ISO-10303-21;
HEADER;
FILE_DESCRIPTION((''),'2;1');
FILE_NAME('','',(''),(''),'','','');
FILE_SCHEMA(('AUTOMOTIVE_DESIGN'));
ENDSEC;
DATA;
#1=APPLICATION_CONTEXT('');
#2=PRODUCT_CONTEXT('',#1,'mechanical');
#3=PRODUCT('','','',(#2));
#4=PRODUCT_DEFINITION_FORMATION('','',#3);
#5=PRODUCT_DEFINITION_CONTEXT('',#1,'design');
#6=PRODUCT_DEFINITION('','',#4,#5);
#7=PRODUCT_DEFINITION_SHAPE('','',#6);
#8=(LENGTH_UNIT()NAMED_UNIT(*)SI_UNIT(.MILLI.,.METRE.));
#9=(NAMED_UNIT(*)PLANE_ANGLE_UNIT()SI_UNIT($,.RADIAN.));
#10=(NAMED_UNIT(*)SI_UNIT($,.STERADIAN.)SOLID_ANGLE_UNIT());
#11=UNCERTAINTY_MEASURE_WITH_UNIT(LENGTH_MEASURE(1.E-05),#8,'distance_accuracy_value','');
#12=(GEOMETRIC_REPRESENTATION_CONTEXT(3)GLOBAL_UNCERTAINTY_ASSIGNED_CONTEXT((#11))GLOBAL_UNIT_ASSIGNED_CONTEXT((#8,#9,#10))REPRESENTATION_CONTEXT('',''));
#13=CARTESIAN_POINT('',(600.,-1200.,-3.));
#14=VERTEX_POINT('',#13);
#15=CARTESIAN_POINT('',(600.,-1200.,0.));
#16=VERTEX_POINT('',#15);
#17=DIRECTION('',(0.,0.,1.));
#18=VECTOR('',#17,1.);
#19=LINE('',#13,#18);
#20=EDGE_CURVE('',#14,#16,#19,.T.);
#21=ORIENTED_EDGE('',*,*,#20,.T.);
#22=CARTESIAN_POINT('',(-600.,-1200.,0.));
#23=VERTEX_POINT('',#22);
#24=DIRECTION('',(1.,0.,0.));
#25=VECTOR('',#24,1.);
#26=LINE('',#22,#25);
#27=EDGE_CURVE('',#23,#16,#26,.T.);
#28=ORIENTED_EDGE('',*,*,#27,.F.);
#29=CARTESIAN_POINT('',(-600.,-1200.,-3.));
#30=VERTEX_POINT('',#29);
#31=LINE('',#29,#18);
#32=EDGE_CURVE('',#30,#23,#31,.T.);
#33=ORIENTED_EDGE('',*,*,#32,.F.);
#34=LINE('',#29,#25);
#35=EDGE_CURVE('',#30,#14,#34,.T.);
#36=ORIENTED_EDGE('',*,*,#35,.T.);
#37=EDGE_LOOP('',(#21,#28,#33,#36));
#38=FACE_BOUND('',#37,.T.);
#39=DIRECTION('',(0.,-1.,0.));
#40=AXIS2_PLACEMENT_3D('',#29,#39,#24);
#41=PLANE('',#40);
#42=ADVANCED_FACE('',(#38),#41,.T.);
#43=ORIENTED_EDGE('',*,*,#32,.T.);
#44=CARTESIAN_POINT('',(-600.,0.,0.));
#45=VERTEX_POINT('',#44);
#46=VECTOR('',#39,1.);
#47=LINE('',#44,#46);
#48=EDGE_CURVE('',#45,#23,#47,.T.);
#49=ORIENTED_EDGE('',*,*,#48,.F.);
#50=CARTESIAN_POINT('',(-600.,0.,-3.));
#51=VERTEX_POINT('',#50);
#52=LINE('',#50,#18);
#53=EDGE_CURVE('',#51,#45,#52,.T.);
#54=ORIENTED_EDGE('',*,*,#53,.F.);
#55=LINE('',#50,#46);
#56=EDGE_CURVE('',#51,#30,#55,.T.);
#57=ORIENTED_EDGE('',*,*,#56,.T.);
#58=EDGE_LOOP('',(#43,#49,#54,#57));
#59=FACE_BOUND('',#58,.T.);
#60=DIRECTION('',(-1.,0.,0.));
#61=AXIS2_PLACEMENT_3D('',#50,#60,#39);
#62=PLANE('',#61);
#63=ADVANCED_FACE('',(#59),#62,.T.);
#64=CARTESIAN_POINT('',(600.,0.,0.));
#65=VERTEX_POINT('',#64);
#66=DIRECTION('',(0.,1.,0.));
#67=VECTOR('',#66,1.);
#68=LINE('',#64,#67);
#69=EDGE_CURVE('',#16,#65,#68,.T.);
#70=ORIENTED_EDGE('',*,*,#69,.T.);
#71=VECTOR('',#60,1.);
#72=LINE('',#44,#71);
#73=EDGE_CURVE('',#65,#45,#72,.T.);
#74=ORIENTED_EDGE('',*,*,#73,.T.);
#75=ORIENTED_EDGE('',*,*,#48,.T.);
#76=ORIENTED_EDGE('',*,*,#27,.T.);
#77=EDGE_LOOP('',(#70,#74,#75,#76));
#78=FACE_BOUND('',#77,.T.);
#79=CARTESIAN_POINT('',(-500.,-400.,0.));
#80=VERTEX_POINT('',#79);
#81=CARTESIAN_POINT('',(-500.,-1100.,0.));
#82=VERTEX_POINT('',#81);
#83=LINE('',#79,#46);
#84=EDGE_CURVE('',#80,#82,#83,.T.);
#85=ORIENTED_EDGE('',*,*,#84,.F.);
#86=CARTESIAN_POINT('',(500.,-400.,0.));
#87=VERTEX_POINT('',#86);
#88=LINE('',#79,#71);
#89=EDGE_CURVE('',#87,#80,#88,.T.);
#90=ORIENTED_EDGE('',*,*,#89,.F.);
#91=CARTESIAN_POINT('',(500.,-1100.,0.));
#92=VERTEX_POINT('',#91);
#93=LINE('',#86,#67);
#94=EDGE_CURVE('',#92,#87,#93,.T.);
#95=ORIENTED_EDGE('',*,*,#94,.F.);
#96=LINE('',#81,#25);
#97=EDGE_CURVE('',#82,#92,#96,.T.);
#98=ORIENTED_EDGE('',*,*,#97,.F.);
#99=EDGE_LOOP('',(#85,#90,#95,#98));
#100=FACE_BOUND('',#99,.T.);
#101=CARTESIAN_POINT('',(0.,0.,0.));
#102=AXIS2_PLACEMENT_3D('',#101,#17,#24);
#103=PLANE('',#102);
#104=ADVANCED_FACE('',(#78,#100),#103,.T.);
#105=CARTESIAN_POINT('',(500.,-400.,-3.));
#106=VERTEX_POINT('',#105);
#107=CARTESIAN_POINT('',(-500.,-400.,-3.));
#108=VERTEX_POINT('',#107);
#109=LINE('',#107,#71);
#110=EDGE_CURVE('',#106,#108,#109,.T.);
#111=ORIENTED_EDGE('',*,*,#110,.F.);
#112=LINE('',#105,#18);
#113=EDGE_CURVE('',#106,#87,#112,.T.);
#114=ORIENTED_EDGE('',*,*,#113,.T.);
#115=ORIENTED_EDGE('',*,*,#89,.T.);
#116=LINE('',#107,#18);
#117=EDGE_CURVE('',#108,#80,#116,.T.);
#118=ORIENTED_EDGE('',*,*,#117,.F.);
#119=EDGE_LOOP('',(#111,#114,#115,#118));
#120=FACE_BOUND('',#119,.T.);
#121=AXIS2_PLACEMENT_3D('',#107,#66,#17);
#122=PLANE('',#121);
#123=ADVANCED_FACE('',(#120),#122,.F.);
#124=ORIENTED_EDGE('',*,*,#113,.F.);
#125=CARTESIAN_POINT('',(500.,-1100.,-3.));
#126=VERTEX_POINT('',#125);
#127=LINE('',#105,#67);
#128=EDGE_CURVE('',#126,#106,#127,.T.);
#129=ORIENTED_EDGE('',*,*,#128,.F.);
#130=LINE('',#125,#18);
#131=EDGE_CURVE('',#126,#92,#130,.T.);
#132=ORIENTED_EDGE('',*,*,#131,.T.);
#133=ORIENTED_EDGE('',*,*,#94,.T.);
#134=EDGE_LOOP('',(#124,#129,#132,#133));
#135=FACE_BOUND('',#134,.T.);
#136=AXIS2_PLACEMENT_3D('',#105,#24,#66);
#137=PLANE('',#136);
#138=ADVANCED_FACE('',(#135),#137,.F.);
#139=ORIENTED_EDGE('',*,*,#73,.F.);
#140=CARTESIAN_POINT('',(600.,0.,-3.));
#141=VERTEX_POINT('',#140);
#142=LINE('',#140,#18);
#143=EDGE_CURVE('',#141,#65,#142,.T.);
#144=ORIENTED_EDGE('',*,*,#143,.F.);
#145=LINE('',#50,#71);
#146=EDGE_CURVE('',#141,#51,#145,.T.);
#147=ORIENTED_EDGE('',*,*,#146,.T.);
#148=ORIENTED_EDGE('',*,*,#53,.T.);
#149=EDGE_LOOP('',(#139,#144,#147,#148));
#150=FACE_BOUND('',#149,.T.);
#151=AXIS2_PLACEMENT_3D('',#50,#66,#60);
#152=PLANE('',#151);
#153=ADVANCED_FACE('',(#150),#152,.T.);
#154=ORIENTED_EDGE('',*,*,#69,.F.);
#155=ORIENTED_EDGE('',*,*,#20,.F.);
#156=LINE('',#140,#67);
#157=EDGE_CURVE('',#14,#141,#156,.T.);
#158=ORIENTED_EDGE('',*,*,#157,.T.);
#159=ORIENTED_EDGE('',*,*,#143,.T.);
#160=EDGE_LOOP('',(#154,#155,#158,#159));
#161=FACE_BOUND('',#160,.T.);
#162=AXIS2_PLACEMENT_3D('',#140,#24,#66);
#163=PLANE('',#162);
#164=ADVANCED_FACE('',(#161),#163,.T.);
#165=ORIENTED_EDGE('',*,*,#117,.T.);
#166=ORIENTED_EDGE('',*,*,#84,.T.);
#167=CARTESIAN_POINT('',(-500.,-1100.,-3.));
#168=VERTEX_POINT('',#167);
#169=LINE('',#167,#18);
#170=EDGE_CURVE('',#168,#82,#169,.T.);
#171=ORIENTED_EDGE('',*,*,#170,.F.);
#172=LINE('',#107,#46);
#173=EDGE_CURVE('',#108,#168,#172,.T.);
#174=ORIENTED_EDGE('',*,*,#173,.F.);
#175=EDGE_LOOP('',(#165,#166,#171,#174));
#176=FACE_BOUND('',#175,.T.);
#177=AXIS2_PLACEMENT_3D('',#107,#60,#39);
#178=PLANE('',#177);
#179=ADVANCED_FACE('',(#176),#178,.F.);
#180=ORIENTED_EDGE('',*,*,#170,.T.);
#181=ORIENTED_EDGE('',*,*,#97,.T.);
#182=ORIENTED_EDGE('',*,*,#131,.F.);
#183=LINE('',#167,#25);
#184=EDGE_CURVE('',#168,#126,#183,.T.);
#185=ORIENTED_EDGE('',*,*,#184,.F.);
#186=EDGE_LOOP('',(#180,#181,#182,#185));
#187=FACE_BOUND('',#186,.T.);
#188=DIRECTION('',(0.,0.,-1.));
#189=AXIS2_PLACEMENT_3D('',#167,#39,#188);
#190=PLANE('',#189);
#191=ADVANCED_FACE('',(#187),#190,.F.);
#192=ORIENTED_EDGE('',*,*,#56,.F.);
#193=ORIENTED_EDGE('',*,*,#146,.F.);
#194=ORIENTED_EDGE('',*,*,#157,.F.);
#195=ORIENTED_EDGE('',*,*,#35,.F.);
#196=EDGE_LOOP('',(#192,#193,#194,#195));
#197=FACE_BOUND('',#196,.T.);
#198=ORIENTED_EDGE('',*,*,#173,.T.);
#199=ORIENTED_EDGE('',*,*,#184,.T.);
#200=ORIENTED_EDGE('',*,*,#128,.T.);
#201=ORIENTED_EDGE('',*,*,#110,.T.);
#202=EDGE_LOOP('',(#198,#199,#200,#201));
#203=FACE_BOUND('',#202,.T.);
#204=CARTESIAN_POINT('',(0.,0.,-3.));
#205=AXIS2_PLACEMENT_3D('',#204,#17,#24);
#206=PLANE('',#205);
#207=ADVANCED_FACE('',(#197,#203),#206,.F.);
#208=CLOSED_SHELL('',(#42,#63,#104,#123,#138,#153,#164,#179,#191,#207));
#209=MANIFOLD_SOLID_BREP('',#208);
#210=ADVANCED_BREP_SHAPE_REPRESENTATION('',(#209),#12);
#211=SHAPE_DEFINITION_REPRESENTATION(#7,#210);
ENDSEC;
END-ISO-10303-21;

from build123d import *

# Parameters (mm, degrees)
SKETCH1_W          = 1200
SKETCH1_H          = 1200
SKETCH1_W_2        = 1000
SKETCH1_H_2        = 700
BASE_FLANGE1_DEPTH = 3


# Sheet-metal steps are written as plain solids
with BuildPart() as part:
    # Sketch1 → Base-Flange1 (new body)
    with BuildSketch(Plane.XY):
        with Locations((0, -600)):
            Rectangle(SKETCH1_W, SKETCH1_H)
        with Locations((0, -750)):
            Rectangle(SKETCH1_W_2, SKETCH1_H_2, mode=Mode.SUBTRACT)
    extrude(amount=-BASE_FLANGE1_DEPTH)


solid = part.part
